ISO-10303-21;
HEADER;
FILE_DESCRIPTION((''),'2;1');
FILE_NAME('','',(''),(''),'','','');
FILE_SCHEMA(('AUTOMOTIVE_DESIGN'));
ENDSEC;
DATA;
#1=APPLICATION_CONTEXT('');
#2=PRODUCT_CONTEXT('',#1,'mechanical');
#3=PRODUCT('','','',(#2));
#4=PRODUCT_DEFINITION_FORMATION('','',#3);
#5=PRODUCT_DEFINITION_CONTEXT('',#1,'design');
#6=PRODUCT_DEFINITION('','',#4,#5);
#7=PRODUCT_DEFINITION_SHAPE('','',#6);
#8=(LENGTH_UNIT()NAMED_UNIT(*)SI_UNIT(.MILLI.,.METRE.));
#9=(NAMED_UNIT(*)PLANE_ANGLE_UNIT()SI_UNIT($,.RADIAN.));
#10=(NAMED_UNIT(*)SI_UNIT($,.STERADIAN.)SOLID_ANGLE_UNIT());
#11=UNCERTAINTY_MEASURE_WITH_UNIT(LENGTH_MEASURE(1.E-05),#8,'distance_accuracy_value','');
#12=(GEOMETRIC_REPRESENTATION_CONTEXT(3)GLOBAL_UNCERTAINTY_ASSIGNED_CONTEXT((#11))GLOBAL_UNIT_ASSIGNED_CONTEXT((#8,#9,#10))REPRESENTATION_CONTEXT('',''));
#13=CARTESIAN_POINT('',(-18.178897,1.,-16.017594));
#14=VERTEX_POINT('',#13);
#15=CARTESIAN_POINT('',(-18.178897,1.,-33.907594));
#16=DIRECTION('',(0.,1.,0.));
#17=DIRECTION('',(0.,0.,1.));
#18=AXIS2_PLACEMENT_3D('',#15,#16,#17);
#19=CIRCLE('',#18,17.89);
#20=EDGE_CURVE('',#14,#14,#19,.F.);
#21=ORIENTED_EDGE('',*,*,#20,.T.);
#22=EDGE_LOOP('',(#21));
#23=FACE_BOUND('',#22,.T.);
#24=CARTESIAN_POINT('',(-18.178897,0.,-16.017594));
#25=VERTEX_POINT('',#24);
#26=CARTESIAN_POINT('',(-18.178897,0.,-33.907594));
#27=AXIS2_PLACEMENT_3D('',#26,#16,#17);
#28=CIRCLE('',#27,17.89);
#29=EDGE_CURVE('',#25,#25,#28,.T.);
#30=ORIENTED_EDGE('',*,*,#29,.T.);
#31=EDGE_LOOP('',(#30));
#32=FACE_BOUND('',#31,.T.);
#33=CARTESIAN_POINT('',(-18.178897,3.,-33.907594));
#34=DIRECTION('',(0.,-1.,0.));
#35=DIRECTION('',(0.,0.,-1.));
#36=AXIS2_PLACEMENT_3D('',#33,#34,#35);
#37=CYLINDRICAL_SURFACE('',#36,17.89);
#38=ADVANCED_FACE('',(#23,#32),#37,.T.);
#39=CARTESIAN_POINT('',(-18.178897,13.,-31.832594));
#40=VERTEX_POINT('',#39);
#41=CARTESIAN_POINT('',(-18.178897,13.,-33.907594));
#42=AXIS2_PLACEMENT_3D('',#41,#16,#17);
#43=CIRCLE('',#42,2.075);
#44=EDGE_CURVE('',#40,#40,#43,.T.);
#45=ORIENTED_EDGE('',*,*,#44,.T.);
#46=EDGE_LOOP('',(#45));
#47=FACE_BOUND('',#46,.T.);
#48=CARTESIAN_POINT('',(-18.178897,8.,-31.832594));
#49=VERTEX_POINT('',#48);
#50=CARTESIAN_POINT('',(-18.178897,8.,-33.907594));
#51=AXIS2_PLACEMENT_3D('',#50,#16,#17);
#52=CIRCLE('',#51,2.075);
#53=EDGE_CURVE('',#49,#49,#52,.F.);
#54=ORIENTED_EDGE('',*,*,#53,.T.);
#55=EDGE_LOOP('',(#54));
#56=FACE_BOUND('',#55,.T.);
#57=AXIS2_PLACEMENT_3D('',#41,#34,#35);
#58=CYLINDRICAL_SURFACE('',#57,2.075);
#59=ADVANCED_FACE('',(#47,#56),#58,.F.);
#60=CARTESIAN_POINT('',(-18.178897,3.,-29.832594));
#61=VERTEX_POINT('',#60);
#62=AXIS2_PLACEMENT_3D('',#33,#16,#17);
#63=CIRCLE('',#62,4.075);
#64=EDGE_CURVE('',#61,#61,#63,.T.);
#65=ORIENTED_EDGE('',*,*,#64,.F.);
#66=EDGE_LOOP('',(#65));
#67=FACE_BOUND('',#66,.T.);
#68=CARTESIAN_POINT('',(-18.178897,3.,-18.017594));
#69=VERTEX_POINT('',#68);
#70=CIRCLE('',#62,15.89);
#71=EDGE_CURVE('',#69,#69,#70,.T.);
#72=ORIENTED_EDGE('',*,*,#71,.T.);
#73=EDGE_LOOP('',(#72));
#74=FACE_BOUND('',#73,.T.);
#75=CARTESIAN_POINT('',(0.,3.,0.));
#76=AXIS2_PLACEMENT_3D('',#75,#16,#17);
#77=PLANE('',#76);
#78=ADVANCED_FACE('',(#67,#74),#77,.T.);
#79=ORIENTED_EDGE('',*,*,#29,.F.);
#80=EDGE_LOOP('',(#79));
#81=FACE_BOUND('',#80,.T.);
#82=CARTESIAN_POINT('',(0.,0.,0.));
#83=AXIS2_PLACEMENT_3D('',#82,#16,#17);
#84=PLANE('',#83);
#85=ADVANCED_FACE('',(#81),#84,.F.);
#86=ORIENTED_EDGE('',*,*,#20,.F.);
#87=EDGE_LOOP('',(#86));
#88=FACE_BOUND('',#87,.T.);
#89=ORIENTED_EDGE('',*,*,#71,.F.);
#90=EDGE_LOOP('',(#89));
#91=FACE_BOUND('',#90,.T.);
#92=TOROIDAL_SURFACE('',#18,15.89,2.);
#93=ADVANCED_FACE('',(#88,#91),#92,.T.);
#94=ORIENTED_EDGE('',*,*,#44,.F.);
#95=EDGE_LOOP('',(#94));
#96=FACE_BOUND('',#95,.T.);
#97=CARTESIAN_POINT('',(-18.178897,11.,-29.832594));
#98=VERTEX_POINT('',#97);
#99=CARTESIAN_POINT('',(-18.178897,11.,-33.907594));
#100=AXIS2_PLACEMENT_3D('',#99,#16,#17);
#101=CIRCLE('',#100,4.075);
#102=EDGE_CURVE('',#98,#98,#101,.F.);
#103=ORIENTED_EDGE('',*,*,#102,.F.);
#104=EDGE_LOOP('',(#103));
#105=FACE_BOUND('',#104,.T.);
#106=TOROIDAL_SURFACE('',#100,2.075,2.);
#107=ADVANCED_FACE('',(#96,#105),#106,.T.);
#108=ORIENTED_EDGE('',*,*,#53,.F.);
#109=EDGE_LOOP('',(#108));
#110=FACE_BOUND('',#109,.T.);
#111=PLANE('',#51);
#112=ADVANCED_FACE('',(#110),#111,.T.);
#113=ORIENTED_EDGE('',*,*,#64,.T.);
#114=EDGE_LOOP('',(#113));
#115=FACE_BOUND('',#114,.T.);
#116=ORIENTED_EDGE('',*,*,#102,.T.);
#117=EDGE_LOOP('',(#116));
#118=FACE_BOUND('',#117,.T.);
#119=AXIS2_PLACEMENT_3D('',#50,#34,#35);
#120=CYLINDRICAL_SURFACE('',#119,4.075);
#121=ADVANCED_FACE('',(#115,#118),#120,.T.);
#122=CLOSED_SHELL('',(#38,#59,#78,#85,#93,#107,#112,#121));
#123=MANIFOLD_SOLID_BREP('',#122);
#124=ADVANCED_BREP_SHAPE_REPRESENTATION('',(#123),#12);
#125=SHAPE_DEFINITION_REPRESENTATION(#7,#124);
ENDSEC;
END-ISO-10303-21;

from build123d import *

# Parameters (mm, degrees)
SKETCH1_R           = 17.89
SKETCH1_R_2         = 4.075
SKETCH1_R_3         = 2.075
BOSS_EXTRUDE1_DEPTH = 3
BOSS_EXTRUDE2_START = 3
SKETCH1_4_R         = 4.075
SKETCH1_4_R_2       = 2.075
BOSS_EXTRUDE2_DEPTH = 5
BOSS_EXTRUDE3_START = 8
SKETCH1_5_R         = 4.075
SKETCH1_5_R_2       = 2.075
BOSS_EXTRUDE3_DEPTH = 5
FILLET1_R           = 2


with BuildPart() as part:
    # Sketch1 → Boss-Extrude1 (new body)
    # profile 1 of 3: a face of its own
    with BuildSketch(Plane(origin=(0, 0, 0), x_dir=(1, 0, 0), z_dir=(0, 1, 0))):
        with Locations(Location((-18.178896686, 33.907594253, 0), (0, 0, 270))):
            Circle(SKETCH1_R)
        with Locations((-18.178896686, 33.907594253)):
            Circle(SKETCH1_R_2, mode=Mode.SUBTRACT)
    # profile 2 of 3: a face of its own
    with BuildSketch(Plane(origin=(0, 0, 0), x_dir=(1, 0, 0), z_dir=(0, 1, 0))):
        with Locations((-18.178896686, 33.907594253)):
            Circle(SKETCH1_R_2)
        with Locations((-18.178896686, 33.907594253)):
            Circle(SKETCH1_R_3, mode=Mode.SUBTRACT)
    # profile 3 of 3: a face of its own
    with BuildSketch(Plane(origin=(0, 0, 0), x_dir=(1, 0, 0), z_dir=(0, 1, 0))):
        with Locations((-18.178896686, 33.907594253)):
            Circle(SKETCH1_R_3)
    extrude(amount=BOSS_EXTRUDE1_DEPTH)

    # Sketch1<4> → Boss-Extrude2 (add)
    # profile 1 of 2: a face of its own
    with BuildSketch(Plane(origin=(0, 0, 0), x_dir=(1, 0, 0), z_dir=(0, 1, 0)).offset(BOSS_EXTRUDE2_START)):
        with Locations(Location((-18.178896686, 33.907594253, 0), (0, 0, 270))):
            Circle(SKETCH1_4_R)
        with Locations((-18.178896686, 33.907594253)):
            Circle(SKETCH1_4_R_2, mode=Mode.SUBTRACT)
    # profile 2 of 2: a face of its own
    with BuildSketch(Plane(origin=(0, 0, 0), x_dir=(1, 0, 0), z_dir=(0, 1, 0)).offset(BOSS_EXTRUDE2_START)):
        with Locations((-18.178896686, 33.907594253)):
            Circle(SKETCH1_4_R_2)
    extrude(amount=BOSS_EXTRUDE2_DEPTH)

    # Sketch1<5> → Boss-Extrude3 (add)
    with BuildSketch(Plane(origin=(0, 0, 0), x_dir=(1, 0, 0), z_dir=(0, 1, 0)).offset(BOSS_EXTRUDE3_START)):
        with Locations(Location((-18.178896686, 33.907594253, 0), (0, 0, 270))):
            Circle(SKETCH1_5_R)
        with Locations(Location((-18.178896686, 33.907594253, 0), (0, 0, 270))):
            Circle(SKETCH1_5_R_2, mode=Mode.SUBTRACT)
    extrude(amount=BOSS_EXTRUDE3_DEPTH)

    # Fillet1
    fillet1_edges = [part.edges().sort_by_distance(p)[0] for p in [
        (-18.178896686, 13, -37.982594253),
        (-18.178896686, 3, -51.797594253),
    ]]
    fillet(fillet1_edges, radius=FILLET1_R - 0.0001)  # a hair under: the kernel refuses the full size


solid = part.part
